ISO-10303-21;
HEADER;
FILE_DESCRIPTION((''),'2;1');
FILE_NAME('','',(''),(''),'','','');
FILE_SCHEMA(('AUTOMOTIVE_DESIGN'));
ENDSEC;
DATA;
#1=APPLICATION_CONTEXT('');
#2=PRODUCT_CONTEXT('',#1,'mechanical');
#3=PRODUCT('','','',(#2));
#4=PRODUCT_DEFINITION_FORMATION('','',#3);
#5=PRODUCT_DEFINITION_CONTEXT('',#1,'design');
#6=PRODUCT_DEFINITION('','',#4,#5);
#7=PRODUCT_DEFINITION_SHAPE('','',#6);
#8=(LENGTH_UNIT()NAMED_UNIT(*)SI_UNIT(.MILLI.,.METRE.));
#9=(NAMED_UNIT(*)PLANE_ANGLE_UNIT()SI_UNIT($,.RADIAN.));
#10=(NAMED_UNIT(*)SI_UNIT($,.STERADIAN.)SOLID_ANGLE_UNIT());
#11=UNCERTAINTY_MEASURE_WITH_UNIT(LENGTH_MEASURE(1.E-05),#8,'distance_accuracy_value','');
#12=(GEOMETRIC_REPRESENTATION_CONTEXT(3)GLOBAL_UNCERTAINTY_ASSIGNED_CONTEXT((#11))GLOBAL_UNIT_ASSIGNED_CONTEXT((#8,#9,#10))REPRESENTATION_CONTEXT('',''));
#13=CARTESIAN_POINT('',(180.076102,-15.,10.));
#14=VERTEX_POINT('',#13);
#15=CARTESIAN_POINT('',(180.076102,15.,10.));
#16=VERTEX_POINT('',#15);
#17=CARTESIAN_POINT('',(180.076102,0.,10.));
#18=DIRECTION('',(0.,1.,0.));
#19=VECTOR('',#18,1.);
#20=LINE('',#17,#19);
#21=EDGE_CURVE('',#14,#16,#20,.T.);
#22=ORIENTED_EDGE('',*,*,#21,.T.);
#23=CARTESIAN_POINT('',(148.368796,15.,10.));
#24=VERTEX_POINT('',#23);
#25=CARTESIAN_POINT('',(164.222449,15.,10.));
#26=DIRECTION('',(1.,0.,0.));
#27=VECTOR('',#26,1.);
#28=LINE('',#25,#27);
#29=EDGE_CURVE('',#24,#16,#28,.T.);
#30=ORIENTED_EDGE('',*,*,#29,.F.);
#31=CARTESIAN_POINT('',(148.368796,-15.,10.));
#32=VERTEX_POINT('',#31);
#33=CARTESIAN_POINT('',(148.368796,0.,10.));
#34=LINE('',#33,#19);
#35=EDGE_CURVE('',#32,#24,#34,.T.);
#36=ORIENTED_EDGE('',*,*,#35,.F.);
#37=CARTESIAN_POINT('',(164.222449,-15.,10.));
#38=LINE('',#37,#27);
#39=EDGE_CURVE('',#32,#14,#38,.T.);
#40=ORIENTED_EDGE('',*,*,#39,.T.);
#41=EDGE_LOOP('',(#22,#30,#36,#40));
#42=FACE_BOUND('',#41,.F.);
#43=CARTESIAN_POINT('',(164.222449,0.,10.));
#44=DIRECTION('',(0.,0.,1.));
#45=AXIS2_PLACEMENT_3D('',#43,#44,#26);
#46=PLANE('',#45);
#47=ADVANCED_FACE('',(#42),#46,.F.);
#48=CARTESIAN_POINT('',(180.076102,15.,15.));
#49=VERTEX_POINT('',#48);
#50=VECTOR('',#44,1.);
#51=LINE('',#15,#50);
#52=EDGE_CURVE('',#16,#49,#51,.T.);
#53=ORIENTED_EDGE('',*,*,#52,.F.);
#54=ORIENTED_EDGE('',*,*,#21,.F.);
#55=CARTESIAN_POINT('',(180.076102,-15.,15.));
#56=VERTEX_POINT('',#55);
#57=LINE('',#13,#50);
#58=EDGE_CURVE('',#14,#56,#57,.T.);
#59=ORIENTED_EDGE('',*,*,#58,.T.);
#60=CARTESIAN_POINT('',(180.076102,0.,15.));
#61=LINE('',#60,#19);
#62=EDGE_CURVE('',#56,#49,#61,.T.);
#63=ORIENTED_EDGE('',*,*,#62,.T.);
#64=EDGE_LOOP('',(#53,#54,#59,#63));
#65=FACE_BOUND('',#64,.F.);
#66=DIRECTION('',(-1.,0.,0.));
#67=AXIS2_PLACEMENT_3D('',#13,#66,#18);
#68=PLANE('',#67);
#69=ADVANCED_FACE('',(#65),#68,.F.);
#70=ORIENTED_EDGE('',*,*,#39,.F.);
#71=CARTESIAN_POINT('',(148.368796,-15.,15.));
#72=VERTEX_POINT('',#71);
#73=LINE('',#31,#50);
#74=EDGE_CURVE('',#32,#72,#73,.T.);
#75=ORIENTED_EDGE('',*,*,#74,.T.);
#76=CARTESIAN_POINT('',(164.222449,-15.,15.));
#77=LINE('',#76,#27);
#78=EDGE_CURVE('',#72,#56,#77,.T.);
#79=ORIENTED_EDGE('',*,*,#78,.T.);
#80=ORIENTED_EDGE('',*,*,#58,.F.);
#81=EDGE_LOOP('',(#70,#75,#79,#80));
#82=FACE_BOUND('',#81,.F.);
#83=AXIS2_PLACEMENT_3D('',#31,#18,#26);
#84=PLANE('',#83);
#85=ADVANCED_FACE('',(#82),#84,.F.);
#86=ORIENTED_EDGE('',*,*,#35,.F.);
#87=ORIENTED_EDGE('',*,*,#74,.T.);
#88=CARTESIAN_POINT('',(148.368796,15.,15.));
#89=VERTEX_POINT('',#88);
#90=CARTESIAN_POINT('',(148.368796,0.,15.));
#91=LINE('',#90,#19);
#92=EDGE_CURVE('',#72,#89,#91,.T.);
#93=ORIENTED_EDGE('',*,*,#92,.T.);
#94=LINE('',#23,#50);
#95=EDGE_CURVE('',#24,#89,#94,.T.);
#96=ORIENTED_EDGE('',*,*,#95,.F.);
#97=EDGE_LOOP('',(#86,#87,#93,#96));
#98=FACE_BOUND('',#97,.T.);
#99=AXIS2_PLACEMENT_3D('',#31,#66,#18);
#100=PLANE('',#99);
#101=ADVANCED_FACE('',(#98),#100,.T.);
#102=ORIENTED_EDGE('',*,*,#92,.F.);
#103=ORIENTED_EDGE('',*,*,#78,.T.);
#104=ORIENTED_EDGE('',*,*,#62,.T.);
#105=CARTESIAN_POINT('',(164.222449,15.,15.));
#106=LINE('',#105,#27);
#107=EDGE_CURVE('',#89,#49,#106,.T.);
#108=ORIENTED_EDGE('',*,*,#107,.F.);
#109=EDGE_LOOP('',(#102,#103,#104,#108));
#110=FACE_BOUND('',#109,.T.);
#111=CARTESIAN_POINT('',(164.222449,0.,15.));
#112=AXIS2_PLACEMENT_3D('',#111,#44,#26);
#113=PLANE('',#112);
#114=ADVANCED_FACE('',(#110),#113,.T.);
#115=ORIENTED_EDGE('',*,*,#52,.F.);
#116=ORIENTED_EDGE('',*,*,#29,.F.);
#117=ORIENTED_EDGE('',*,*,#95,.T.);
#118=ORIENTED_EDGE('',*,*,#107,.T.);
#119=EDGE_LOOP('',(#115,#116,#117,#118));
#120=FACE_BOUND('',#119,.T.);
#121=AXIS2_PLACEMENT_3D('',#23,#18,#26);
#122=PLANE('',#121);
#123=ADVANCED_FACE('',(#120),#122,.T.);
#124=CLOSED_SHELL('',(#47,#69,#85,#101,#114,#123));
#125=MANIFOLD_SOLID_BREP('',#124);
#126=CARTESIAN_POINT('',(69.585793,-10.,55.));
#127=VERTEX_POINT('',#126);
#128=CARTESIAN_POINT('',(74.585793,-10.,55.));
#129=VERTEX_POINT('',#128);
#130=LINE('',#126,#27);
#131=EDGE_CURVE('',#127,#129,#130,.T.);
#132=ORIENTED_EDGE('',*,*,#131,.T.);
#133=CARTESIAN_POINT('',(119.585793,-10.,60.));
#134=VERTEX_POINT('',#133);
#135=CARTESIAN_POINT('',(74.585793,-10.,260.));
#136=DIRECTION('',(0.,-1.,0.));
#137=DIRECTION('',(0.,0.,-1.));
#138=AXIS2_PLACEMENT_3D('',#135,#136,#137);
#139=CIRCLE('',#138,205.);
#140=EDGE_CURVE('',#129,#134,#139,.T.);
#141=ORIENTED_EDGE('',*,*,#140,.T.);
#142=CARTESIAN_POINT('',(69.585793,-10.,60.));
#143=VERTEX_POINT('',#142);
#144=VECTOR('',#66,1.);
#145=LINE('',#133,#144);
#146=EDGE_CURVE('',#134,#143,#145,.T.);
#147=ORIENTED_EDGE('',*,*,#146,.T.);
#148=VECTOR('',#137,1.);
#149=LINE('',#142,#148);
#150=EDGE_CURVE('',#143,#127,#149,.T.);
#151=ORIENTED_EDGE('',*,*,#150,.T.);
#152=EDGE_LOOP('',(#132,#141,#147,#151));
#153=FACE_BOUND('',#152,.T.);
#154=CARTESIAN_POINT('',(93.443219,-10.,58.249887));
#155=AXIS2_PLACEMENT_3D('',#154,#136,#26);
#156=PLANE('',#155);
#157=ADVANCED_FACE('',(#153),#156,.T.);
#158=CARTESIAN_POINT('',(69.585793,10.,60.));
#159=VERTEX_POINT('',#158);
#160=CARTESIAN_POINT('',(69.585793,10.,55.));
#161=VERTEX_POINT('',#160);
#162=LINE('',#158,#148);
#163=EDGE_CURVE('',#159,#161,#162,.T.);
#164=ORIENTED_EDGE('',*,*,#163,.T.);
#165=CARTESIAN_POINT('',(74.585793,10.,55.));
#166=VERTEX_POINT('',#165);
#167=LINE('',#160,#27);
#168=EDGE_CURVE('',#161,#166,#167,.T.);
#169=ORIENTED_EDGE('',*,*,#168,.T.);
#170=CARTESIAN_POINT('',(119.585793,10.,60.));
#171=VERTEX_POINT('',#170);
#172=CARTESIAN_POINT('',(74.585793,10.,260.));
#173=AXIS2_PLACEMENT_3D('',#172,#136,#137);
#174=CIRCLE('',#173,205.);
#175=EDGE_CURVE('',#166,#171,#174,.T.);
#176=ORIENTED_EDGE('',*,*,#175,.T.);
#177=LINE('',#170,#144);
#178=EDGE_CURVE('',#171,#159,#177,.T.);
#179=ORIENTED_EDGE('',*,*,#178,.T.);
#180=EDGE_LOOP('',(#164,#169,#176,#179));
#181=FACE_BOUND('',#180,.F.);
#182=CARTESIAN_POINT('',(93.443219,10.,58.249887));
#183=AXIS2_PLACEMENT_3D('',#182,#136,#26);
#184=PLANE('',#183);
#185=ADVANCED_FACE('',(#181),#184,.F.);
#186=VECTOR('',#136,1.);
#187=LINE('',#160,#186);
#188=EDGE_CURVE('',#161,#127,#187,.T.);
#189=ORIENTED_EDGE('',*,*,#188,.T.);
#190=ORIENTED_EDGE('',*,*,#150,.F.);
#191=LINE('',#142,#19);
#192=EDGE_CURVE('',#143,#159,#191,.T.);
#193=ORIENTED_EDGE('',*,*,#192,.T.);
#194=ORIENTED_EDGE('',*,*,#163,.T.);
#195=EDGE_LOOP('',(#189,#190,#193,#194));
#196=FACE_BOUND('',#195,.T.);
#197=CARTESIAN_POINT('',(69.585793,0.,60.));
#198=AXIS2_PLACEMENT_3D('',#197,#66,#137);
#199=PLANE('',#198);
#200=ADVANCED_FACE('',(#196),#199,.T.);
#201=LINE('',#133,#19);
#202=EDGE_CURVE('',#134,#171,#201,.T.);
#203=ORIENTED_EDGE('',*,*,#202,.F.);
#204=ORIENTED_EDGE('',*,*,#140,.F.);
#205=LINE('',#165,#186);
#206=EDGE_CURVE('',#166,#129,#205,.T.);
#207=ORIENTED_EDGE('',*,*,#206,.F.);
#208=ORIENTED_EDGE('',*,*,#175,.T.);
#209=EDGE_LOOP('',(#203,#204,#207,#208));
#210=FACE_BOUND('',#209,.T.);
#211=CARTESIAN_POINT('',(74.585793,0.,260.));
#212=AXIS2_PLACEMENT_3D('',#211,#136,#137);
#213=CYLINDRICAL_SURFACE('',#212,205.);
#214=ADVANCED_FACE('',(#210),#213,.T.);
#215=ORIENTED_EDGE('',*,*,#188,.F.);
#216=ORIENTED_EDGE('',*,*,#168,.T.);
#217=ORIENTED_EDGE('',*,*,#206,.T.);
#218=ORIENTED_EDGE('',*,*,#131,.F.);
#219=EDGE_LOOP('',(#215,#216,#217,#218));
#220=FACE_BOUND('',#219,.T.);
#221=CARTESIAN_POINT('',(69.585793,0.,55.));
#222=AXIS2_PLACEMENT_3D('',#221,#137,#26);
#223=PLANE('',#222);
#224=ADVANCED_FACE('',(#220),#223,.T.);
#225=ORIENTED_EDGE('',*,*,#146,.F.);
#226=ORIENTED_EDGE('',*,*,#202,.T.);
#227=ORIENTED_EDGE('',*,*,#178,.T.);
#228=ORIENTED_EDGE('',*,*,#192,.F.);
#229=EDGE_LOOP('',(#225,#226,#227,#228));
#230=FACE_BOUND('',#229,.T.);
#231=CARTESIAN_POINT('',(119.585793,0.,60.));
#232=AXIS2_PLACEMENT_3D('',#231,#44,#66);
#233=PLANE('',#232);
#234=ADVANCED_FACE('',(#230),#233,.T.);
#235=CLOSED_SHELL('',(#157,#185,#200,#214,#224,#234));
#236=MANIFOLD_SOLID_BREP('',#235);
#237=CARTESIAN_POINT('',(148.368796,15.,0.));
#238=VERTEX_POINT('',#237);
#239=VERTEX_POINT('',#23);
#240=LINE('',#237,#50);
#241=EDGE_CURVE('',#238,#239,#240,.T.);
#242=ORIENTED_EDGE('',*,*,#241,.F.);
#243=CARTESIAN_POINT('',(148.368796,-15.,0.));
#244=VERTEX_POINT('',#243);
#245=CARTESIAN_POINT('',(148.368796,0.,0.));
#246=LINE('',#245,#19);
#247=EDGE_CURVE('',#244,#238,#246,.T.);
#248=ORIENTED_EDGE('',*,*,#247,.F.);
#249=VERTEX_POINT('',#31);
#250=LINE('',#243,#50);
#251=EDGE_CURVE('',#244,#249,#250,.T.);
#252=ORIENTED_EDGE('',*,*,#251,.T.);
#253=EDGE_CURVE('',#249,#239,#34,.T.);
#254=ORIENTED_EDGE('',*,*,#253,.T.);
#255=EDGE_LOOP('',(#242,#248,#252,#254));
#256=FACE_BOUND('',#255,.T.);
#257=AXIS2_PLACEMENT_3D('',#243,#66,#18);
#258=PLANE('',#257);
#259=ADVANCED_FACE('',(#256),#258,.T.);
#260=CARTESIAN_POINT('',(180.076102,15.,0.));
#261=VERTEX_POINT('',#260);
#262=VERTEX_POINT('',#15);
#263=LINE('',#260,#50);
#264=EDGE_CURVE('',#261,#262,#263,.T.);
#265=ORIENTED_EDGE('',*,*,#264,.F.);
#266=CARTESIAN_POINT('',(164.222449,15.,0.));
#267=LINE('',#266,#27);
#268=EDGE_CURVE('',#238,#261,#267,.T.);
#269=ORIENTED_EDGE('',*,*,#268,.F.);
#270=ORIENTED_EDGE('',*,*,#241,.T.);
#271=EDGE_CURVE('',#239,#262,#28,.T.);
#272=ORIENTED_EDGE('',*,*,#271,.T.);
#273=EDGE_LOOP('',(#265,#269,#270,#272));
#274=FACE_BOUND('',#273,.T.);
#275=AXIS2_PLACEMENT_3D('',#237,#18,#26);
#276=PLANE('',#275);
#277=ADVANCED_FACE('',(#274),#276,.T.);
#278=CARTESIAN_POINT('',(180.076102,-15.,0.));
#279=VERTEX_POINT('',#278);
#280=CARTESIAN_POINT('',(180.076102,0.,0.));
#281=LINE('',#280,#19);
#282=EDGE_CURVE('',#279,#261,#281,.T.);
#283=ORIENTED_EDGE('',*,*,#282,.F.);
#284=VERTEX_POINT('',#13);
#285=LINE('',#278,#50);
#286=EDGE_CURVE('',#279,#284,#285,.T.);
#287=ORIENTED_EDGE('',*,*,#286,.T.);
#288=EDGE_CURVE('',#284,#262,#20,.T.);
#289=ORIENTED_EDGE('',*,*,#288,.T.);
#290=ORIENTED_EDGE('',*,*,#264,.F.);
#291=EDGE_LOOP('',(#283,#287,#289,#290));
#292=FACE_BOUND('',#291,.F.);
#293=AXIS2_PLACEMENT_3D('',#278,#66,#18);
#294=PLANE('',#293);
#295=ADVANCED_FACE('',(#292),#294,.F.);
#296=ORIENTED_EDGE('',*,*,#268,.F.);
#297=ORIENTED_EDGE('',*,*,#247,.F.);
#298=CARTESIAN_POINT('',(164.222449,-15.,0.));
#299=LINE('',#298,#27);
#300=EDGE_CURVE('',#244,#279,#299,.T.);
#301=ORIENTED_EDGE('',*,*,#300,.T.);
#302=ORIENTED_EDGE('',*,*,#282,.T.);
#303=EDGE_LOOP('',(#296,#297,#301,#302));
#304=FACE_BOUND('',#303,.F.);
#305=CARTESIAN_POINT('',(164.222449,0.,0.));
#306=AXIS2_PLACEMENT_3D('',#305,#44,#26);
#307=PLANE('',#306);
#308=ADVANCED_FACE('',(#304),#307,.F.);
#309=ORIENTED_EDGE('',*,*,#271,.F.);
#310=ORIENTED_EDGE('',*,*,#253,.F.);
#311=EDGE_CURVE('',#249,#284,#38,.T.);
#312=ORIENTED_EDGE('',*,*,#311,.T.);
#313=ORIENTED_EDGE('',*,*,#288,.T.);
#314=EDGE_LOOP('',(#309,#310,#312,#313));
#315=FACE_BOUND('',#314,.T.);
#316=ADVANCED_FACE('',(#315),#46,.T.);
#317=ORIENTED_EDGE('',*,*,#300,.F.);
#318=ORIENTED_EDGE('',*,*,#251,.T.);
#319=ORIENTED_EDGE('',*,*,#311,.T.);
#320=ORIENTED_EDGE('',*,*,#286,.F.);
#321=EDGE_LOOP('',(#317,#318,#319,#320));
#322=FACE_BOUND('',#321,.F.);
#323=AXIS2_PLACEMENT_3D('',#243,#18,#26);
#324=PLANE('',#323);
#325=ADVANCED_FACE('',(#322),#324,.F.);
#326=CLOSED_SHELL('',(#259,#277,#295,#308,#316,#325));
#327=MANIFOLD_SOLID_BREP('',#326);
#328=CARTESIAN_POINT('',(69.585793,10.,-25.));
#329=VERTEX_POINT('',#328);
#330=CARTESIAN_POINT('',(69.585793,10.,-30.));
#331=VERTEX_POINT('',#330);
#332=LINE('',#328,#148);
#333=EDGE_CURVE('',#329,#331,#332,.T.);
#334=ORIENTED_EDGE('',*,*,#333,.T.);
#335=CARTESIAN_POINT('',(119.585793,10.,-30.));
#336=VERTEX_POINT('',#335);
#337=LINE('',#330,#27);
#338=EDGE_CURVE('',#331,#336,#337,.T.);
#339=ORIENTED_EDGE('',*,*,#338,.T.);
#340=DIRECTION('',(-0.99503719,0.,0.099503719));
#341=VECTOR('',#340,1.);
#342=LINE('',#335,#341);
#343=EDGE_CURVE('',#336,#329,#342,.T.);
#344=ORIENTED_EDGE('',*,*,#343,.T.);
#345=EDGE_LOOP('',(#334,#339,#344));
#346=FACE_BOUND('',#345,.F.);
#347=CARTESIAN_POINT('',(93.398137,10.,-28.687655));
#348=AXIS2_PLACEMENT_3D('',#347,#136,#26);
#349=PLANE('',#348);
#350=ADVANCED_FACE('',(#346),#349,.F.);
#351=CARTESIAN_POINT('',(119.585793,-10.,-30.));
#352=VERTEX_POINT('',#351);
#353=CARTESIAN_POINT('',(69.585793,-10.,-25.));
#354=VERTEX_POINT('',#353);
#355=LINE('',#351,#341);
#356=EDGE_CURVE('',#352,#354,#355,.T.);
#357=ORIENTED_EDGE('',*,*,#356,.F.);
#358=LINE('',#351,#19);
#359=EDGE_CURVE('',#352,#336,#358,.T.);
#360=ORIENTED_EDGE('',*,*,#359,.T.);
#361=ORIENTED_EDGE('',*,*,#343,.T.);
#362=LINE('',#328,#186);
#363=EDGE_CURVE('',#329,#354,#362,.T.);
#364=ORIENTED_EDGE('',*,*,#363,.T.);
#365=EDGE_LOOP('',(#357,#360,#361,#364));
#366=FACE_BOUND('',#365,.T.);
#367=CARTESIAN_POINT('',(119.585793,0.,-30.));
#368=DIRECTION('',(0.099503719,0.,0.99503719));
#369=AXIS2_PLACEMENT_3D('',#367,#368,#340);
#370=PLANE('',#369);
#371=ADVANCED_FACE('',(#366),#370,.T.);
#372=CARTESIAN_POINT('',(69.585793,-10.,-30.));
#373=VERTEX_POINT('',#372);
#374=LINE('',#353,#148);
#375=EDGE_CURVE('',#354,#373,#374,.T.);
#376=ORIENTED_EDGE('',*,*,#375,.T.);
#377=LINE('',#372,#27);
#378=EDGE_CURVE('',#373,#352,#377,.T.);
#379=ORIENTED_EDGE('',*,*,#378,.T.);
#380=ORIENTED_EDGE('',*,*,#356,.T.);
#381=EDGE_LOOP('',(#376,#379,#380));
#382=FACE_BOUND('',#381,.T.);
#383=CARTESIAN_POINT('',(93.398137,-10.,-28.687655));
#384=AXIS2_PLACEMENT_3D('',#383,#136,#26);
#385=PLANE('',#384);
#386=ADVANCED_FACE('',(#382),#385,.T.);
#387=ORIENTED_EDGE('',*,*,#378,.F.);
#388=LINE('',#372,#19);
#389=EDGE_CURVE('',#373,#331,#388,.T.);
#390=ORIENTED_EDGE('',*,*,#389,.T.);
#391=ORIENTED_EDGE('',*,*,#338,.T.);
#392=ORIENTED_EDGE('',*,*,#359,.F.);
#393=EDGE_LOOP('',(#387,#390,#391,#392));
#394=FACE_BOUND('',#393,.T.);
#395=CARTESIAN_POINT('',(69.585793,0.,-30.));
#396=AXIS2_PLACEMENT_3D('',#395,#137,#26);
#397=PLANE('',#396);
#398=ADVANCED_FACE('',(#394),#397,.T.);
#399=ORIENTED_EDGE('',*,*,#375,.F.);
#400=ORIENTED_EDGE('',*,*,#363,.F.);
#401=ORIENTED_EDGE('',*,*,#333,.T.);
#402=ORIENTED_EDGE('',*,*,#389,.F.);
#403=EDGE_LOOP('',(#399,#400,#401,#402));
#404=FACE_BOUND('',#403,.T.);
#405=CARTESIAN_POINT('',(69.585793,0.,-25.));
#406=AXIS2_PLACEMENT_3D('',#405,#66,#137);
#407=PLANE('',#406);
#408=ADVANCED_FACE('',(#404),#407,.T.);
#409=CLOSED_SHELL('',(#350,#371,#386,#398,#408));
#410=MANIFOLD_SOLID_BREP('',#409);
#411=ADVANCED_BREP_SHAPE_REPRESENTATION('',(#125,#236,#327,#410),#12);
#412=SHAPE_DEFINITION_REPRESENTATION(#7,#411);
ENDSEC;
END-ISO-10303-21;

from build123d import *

# Parameters (mm, degrees)
F1_DEPTH = 10
F2_W     = 31.7073058904
F2_H     = 30
F3_DEPTH = 10
F4_DEPTH = 5


# Not quite as in the source:
# - a feature names something its author has since deleted; it is built from what else it names


with BuildPart() as f1:
    # F0 (on Front) → F1 (new body, symmetric)
    with BuildSketch(Plane.XZ):
        with BuildLine():
            Line((69.5857927203, 60), (69.5857927203, 55))
            Line((69.5857927203, 55), (74.5857927203, 55))
            ThreePointArc((74.5857927203, 55), (97.2242555657, 56.2538343919), (119.5857927203, 60))
            Line((119.5857927203, 60), (69.5857927203, 60))
        make_face()
    extrude(amount=F1_DEPTH, both=True)


with BuildPart() as f1b:
    # F0 (on Front) → F1, piece 2 (new body, symmetric)
    with BuildSketch(Plane.XZ):
        Polygon((119.5857927203, -30), (69.5857927203, -25), (69.5857927203, -30), align=None)
    extrude(amount=F1_DEPTH, both=True)


with BuildPart() as f3:
    # F2 (on Top) → F3 (new body)
    with BuildSketch(Plane.XY):
        with Locations((164.2224490643, 0)):
            Rectangle(F2_W, F2_H)
    extrude(amount=F3_DEPTH)


with BuildPart() as f4:
    # F4 (new): a face of the model
    f4_faces = [f3.part.faces().sort_by_distance(p)[0] for p in [
        (164.2224490643, 0, 10),
    ]]
    extrude(f4_faces, amount=F4_DEPTH)


solid = Compound([f1.part, f1b.part, f3.part, f4.part])
